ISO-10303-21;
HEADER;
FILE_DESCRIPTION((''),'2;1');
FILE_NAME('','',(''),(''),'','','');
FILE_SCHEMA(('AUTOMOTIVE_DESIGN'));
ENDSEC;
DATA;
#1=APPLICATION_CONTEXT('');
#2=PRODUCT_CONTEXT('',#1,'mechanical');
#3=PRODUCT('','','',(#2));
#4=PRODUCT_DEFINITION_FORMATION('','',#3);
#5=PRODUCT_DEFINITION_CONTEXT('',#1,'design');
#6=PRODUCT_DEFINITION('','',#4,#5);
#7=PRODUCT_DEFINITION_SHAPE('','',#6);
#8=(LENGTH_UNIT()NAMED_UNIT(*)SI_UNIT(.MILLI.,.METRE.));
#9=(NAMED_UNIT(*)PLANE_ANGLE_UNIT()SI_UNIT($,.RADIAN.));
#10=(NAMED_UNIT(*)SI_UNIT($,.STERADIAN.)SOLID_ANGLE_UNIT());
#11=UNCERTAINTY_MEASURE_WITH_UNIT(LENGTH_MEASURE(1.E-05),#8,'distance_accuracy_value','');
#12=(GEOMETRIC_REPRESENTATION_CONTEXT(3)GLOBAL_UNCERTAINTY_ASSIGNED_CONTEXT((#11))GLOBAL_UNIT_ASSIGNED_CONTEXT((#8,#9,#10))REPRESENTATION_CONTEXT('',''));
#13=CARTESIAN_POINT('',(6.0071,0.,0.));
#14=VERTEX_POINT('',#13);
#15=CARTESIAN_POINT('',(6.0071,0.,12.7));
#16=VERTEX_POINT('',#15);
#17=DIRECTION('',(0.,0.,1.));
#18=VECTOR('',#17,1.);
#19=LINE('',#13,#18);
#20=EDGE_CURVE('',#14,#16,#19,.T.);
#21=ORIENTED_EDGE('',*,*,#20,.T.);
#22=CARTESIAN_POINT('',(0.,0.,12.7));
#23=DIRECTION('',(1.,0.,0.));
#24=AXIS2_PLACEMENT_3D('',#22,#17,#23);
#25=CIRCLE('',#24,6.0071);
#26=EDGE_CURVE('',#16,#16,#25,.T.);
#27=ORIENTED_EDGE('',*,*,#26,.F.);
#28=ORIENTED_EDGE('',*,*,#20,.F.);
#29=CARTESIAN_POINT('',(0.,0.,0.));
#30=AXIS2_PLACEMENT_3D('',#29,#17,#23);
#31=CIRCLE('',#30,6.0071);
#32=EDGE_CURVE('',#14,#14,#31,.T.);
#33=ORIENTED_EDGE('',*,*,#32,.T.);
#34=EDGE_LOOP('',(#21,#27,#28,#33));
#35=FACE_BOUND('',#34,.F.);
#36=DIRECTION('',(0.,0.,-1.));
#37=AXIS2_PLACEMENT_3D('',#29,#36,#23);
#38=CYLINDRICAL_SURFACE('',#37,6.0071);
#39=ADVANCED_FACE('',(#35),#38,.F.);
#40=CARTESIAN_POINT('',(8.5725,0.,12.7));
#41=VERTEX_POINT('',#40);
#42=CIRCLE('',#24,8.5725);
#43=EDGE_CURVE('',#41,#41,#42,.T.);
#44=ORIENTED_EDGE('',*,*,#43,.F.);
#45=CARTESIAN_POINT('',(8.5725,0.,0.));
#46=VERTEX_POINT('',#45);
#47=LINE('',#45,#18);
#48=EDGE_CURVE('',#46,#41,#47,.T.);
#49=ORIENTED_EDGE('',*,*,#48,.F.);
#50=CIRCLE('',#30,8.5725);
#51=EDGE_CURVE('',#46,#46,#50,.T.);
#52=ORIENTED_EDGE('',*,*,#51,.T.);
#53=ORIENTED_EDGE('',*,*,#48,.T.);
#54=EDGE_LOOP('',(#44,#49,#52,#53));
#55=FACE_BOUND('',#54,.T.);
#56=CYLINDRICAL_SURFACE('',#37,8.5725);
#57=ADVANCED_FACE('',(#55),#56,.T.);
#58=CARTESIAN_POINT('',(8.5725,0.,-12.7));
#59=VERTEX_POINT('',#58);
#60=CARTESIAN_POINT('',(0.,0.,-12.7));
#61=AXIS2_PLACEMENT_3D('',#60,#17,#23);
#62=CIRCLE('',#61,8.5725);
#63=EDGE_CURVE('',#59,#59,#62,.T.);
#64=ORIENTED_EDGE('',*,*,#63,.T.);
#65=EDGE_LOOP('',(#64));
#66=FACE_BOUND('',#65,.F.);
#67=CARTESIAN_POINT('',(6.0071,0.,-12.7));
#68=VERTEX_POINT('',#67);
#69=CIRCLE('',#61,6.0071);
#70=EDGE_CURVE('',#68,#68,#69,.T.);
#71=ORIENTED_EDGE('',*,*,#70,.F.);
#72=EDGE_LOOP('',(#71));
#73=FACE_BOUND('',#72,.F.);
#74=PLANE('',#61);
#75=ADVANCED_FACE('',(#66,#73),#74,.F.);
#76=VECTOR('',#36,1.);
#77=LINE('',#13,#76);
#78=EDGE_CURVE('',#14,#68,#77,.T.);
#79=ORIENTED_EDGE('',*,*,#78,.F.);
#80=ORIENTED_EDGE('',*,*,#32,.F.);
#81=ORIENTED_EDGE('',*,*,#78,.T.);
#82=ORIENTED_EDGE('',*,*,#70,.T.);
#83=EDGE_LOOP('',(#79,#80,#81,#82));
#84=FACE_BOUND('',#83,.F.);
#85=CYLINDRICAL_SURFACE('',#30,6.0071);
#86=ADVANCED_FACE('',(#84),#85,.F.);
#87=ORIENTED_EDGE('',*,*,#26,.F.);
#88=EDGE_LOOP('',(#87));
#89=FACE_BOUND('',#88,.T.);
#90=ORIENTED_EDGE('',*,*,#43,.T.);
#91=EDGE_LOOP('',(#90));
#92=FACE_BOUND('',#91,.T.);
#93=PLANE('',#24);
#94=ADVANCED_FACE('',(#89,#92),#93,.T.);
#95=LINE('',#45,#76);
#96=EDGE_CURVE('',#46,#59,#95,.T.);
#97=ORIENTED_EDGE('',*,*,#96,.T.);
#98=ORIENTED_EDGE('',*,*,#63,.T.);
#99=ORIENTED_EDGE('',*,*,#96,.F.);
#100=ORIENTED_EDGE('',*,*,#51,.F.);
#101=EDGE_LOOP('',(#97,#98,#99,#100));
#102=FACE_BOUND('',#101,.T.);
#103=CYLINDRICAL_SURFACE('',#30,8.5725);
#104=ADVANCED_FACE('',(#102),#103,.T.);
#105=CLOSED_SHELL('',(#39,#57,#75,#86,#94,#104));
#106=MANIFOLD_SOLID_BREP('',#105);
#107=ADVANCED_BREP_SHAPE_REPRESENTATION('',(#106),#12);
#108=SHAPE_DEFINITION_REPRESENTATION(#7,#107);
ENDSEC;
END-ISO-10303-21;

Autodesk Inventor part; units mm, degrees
ref_plane "YZ Plane" through (0, 0, 0) normal (1, 0, 0) x (0, 1, 0)
ref_plane "XZ Plane" through (0, 0, 0) normal (0, 1, 0) x (-1, 0, 0)
ref_plane "XY Plane" through (0, 0, 0) normal (0, 0, 1) x (1, 0, 0)
sketch "Sketch1" plane through (0, 0, 0) normal (0, 0, 1) x (1, 0, 0)
  circle A0 centre (0, 0) radius 6.0071
  circle A1 centre (0, 0) radius 8.5725
  dimension "d0" = 12.0142
  dimension "d2" = 17.145
extrude "Extrusion1" add sketch "Sketch1" along normal mid plane 25.4
properties part number "PVC Spacer 375 Sched 40" material "PVC-Piping"
